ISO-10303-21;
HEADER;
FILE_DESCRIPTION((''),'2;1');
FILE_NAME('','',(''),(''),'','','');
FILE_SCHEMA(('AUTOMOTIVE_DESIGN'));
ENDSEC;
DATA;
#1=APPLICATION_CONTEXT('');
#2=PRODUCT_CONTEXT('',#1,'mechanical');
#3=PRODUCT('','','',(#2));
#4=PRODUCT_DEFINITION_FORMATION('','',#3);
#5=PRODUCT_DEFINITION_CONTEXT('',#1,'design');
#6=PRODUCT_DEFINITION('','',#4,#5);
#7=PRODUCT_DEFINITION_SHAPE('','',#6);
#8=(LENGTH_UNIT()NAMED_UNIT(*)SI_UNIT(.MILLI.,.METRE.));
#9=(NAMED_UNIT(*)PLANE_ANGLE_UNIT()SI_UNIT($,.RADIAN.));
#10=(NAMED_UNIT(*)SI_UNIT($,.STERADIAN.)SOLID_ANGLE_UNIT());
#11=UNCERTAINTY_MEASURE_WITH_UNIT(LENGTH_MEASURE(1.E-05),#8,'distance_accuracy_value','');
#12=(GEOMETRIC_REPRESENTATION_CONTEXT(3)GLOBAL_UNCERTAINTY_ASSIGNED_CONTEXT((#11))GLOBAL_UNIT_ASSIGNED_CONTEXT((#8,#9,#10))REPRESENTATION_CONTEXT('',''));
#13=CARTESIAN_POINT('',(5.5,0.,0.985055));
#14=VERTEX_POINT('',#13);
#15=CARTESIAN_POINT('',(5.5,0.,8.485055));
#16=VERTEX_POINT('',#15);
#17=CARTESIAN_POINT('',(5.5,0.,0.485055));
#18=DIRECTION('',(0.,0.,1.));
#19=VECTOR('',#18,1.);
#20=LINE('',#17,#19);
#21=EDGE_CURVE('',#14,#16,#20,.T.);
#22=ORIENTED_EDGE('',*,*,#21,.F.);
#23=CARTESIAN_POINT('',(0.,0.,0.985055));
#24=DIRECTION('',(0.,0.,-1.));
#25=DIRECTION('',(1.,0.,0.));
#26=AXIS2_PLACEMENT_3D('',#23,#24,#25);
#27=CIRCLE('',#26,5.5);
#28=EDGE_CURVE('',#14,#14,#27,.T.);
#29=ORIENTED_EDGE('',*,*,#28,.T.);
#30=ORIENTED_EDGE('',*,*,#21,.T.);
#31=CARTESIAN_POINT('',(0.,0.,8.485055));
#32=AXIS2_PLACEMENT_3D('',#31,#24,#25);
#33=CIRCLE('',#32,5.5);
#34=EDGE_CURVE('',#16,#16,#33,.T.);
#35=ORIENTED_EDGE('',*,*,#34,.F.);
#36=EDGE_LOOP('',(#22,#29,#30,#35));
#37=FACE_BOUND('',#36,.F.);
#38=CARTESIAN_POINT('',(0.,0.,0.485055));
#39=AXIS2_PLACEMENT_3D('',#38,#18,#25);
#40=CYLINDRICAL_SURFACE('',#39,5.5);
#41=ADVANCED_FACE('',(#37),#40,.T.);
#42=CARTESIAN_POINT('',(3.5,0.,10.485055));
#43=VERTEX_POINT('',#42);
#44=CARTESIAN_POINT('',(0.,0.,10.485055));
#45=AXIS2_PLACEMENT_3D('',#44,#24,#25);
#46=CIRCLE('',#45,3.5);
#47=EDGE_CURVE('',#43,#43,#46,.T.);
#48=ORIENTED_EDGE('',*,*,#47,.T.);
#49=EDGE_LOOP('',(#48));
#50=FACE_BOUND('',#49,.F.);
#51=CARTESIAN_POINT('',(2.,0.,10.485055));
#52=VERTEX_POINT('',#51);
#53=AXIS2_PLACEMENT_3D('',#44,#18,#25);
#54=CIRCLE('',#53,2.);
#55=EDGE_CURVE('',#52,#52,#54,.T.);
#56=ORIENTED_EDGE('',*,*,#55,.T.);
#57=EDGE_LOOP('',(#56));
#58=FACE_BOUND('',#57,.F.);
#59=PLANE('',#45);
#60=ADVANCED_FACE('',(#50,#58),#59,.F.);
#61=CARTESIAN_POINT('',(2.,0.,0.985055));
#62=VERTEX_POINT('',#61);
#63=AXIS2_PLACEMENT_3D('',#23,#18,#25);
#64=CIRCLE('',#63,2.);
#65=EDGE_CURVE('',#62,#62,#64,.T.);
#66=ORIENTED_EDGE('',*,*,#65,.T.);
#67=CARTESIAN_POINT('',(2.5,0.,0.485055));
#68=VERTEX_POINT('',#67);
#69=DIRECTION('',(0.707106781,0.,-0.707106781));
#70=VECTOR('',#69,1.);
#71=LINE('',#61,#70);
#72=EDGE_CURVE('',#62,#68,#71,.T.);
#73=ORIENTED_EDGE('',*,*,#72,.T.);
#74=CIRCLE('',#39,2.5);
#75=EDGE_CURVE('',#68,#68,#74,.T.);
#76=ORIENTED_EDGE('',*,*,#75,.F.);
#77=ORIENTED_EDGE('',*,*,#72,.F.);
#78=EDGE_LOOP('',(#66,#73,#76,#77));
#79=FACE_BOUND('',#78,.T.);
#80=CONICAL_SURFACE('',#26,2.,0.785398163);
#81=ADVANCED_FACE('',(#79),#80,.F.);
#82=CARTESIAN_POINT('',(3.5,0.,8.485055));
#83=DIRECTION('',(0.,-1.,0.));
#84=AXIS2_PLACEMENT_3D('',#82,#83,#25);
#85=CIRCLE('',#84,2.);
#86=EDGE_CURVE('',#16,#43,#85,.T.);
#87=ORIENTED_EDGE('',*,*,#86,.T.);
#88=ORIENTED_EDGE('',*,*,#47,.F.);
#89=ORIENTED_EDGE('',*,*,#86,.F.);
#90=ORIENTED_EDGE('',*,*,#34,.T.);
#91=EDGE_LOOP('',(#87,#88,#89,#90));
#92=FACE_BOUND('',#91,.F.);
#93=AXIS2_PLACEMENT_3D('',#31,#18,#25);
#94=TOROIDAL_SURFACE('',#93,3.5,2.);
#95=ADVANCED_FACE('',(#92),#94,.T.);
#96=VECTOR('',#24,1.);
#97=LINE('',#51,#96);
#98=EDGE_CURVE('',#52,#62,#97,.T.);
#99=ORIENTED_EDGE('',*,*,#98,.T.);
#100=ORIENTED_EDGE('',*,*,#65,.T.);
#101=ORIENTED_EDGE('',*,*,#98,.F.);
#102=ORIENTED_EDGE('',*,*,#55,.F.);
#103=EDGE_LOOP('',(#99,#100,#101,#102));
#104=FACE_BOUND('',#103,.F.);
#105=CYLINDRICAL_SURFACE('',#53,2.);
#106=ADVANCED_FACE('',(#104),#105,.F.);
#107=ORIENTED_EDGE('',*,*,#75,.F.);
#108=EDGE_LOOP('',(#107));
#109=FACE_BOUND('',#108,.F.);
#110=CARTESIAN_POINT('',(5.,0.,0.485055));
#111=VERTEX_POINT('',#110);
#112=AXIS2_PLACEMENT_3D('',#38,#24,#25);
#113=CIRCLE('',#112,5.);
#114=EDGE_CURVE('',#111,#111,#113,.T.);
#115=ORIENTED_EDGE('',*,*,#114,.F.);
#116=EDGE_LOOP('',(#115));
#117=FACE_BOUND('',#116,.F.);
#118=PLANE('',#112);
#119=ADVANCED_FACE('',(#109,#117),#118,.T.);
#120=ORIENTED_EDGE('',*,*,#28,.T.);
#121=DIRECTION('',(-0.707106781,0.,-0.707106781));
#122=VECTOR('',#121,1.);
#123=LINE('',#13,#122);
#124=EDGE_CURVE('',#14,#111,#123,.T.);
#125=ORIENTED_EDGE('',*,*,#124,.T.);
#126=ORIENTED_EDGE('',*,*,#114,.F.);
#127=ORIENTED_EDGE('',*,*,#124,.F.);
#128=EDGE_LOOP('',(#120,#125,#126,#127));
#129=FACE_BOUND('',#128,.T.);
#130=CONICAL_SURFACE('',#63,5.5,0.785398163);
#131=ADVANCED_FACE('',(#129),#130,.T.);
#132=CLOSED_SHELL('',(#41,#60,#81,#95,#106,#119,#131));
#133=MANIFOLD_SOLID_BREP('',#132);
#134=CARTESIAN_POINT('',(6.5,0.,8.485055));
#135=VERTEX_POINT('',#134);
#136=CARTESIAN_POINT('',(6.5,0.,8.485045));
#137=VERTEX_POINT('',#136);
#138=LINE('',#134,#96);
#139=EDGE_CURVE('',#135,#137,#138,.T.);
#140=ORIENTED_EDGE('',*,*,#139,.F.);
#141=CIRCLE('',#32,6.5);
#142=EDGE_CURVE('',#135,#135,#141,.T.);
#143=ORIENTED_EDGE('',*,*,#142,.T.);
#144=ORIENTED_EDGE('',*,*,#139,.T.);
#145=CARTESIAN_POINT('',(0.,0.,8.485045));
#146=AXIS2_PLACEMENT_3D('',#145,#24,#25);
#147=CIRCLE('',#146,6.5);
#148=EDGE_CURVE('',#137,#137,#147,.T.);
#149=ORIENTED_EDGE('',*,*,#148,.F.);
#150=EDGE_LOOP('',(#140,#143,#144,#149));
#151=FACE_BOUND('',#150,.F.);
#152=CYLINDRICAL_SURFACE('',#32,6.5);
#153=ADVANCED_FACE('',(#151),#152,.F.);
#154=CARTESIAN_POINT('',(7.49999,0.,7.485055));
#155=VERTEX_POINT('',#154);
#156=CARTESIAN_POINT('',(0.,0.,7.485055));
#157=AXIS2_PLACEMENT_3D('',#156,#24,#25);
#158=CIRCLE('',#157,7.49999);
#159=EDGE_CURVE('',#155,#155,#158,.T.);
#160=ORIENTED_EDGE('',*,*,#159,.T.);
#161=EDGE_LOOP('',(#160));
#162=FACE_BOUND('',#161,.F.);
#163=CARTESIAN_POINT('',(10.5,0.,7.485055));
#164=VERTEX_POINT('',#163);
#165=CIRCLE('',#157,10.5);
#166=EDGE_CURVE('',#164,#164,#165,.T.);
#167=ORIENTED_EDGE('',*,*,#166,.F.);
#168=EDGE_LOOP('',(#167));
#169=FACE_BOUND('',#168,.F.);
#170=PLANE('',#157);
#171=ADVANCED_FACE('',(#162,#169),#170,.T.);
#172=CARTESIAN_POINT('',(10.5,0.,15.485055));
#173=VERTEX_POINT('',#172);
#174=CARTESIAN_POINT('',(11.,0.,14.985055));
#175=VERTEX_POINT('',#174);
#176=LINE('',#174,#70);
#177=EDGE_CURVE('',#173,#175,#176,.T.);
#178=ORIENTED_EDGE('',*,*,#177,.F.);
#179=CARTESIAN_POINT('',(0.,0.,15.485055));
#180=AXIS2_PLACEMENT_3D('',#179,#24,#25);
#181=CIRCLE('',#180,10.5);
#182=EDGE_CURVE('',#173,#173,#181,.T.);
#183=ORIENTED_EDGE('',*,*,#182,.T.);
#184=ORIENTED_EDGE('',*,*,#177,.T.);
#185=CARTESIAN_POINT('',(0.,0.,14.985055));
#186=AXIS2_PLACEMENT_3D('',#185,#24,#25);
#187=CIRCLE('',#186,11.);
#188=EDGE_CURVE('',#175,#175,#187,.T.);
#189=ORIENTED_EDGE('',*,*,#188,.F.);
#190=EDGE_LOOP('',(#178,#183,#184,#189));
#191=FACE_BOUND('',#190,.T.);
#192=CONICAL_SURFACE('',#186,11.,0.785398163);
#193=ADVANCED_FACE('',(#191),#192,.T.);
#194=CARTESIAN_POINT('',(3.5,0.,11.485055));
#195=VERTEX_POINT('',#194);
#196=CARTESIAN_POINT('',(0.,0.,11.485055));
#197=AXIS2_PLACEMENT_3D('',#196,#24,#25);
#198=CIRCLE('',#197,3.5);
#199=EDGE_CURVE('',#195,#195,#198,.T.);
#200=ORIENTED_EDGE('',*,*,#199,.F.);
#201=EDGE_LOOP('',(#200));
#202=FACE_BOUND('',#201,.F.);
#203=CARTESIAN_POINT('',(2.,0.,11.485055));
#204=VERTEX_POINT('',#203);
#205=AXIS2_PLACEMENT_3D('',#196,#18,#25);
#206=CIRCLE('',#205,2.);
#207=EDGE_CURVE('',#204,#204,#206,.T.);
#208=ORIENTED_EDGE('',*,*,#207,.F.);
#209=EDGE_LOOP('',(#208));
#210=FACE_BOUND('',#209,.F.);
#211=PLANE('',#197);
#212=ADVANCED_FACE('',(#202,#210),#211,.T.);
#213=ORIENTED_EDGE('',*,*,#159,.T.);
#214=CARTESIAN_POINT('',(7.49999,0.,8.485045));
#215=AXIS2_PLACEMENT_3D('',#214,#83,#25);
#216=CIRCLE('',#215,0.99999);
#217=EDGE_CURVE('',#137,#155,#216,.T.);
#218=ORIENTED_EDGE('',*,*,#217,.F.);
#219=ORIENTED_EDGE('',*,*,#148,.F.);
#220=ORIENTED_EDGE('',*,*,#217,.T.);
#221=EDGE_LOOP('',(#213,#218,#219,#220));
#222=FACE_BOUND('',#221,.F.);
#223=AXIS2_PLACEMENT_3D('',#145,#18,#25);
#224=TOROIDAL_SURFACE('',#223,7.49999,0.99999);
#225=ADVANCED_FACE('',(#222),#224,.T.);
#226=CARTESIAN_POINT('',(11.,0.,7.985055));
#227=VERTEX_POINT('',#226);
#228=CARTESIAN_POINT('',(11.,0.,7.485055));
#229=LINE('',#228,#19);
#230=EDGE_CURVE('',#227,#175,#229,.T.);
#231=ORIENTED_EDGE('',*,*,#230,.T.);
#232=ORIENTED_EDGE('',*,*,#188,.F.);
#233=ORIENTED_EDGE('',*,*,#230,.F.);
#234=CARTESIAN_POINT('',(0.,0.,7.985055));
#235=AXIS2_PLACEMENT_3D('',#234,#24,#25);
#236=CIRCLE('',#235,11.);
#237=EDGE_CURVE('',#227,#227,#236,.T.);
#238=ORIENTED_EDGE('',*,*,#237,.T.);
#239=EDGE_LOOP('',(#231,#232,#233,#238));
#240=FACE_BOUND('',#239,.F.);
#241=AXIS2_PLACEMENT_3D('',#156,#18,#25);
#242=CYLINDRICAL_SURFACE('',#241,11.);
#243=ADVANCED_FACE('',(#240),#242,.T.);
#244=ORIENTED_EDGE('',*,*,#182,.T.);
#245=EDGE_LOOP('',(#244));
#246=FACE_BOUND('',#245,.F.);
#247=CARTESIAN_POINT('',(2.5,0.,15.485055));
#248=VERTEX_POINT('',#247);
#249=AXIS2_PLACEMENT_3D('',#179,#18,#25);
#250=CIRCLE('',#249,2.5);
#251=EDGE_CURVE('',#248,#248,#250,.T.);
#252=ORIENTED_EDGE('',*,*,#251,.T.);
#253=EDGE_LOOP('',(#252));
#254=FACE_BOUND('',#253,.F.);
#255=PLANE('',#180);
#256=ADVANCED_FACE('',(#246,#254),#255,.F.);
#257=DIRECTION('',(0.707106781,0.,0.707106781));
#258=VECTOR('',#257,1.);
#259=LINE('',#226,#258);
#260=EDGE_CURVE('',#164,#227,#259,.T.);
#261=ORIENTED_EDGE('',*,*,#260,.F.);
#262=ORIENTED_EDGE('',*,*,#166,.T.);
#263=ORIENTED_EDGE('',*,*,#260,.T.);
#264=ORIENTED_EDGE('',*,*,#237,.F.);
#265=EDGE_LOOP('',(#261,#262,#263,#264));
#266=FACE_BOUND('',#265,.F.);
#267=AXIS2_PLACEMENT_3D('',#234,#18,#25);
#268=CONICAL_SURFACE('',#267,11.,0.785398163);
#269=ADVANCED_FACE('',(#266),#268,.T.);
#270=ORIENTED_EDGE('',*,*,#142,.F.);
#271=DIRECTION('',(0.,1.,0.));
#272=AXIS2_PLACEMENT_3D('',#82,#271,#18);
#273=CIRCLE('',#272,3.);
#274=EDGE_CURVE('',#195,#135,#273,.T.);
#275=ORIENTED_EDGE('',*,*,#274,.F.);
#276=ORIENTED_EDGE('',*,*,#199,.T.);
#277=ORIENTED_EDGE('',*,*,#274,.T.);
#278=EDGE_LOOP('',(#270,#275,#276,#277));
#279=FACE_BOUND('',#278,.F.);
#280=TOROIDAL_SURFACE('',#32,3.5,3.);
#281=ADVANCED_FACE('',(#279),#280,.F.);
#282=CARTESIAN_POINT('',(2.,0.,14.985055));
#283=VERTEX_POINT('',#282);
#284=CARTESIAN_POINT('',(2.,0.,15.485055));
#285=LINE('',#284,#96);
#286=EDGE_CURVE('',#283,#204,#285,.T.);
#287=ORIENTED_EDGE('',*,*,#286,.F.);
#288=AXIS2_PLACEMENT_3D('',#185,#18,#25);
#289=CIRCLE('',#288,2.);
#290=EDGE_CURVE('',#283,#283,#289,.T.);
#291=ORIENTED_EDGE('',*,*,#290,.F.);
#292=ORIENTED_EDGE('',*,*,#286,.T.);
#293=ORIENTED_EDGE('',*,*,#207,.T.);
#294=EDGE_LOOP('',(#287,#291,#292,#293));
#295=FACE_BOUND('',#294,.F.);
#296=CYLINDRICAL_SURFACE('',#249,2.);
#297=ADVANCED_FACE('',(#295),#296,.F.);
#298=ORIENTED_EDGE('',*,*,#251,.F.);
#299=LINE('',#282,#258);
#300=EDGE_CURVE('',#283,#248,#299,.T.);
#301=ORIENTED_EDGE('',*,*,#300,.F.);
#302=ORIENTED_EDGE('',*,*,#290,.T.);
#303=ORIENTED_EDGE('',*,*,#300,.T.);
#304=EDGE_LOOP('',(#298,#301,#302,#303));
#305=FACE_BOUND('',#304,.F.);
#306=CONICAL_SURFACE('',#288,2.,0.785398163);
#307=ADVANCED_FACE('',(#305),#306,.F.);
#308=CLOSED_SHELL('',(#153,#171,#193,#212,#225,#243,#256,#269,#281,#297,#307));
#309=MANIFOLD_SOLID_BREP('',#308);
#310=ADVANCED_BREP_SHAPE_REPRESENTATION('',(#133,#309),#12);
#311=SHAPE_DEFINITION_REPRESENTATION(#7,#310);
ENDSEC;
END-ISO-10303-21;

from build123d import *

# Parameters (mm, degrees)
F2_R     = 2
F3_DEPTH = 10.001
F4_SIZE  = 0.5
F5_R     = 2
F6_DEPTH = 25
F7_SIZE  = 0.5
F8_R     = 0.99999


# Not quite as in the source:
# - a fillet or chamfer is up to 0.001 mm smaller than in the source, because OpenCascade refuses the exact size


with BuildPart() as f1:
    # F0 (on Front) → F1 (revolve)
    with BuildSketch(Plane.XZ):
        with BuildLine():
            Line((3.5, 10.4850548723), (0, 10.4850548723))
            Line((0, 10.4850548723), (0, 0.4850548723))
            Line((0, 0.4850548723), (5.5, 0.4850548723))
            Line((5.5, 0.4850548723), (5.5, 8.4850548723))
            ThreePointArc((5.5, 8.4850548723), (4.9142135624, 9.8992684347), (3.5, 10.4850548723))
        make_face()
    revolve(axis=Axis((0, 0, 5.4850548723), (0, 0, -1)))

    # F2 (on face) → F3 (cut, through all)
    with BuildSketch(Plane.XY.offset(10.4850548723)):
        Circle(F2_R)
    extrude(amount=-F3_DEPTH, mode=Mode.SUBTRACT)

    # F4
    f4_edges = [f1.edges().sort_by_distance(p)[0] for p in [
        (-5.5, 0, 0.485055),
        (-2, 0, 0.485055),
    ]]
    chamfer(f4_edges, length=F4_SIZE)


with BuildPart() as f1b:
    # F0 (on Front) → F1, piece 2 (revolve)
    with BuildSketch(Plane.XZ):
        with BuildLine():
            Line((0, 11.4850548723), (3.5, 11.4850548723))
            ThreePointArc((3.5, 11.4850548723), (5.6213203436, 10.6063752159), (6.5, 8.4850548723))
            Line((6.5, 8.4850548723), (6.5, 7.4850548723))
            Line((6.5, 7.4850548723), (11, 7.4850548723))
            Line((11, 7.4850548723), (11, 15.4850548723))
            Line((11, 15.4850548723), (0, 15.4850548723))
            Line((0, 15.4850548723), (0, 11.4850548723))
        make_face()
    revolve(axis=Axis((0, 0, 5.4850548723), (0, 0, -1)))

    # F5 (on face) → F6 (cut)
    with BuildSketch(Plane.XY.offset(15.4850548723)):
        Circle(F5_R)
    extrude(amount=-F6_DEPTH, mode=Mode.SUBTRACT)

    # F7
    f7_edges = [f1b.edges().sort_by_distance(p)[0] for p in [
        (-11, 0, 7.485055),
        (-11, 0, 15.485055),
        (-2, 0, 15.485055),
    ]]
    chamfer(f7_edges, length=F7_SIZE)

    # F8 (radius 1 in the source; OpenCascade refuses exactly that, so slightly less here)
    f8_edges = [f1b.edges().sort_by_distance(p)[0] for p in [
        (-6.5, 0, 7.485055),
    ]]
    fillet(f8_edges, radius=F8_R)


solid = Compound([f1.part, f1b.part])
